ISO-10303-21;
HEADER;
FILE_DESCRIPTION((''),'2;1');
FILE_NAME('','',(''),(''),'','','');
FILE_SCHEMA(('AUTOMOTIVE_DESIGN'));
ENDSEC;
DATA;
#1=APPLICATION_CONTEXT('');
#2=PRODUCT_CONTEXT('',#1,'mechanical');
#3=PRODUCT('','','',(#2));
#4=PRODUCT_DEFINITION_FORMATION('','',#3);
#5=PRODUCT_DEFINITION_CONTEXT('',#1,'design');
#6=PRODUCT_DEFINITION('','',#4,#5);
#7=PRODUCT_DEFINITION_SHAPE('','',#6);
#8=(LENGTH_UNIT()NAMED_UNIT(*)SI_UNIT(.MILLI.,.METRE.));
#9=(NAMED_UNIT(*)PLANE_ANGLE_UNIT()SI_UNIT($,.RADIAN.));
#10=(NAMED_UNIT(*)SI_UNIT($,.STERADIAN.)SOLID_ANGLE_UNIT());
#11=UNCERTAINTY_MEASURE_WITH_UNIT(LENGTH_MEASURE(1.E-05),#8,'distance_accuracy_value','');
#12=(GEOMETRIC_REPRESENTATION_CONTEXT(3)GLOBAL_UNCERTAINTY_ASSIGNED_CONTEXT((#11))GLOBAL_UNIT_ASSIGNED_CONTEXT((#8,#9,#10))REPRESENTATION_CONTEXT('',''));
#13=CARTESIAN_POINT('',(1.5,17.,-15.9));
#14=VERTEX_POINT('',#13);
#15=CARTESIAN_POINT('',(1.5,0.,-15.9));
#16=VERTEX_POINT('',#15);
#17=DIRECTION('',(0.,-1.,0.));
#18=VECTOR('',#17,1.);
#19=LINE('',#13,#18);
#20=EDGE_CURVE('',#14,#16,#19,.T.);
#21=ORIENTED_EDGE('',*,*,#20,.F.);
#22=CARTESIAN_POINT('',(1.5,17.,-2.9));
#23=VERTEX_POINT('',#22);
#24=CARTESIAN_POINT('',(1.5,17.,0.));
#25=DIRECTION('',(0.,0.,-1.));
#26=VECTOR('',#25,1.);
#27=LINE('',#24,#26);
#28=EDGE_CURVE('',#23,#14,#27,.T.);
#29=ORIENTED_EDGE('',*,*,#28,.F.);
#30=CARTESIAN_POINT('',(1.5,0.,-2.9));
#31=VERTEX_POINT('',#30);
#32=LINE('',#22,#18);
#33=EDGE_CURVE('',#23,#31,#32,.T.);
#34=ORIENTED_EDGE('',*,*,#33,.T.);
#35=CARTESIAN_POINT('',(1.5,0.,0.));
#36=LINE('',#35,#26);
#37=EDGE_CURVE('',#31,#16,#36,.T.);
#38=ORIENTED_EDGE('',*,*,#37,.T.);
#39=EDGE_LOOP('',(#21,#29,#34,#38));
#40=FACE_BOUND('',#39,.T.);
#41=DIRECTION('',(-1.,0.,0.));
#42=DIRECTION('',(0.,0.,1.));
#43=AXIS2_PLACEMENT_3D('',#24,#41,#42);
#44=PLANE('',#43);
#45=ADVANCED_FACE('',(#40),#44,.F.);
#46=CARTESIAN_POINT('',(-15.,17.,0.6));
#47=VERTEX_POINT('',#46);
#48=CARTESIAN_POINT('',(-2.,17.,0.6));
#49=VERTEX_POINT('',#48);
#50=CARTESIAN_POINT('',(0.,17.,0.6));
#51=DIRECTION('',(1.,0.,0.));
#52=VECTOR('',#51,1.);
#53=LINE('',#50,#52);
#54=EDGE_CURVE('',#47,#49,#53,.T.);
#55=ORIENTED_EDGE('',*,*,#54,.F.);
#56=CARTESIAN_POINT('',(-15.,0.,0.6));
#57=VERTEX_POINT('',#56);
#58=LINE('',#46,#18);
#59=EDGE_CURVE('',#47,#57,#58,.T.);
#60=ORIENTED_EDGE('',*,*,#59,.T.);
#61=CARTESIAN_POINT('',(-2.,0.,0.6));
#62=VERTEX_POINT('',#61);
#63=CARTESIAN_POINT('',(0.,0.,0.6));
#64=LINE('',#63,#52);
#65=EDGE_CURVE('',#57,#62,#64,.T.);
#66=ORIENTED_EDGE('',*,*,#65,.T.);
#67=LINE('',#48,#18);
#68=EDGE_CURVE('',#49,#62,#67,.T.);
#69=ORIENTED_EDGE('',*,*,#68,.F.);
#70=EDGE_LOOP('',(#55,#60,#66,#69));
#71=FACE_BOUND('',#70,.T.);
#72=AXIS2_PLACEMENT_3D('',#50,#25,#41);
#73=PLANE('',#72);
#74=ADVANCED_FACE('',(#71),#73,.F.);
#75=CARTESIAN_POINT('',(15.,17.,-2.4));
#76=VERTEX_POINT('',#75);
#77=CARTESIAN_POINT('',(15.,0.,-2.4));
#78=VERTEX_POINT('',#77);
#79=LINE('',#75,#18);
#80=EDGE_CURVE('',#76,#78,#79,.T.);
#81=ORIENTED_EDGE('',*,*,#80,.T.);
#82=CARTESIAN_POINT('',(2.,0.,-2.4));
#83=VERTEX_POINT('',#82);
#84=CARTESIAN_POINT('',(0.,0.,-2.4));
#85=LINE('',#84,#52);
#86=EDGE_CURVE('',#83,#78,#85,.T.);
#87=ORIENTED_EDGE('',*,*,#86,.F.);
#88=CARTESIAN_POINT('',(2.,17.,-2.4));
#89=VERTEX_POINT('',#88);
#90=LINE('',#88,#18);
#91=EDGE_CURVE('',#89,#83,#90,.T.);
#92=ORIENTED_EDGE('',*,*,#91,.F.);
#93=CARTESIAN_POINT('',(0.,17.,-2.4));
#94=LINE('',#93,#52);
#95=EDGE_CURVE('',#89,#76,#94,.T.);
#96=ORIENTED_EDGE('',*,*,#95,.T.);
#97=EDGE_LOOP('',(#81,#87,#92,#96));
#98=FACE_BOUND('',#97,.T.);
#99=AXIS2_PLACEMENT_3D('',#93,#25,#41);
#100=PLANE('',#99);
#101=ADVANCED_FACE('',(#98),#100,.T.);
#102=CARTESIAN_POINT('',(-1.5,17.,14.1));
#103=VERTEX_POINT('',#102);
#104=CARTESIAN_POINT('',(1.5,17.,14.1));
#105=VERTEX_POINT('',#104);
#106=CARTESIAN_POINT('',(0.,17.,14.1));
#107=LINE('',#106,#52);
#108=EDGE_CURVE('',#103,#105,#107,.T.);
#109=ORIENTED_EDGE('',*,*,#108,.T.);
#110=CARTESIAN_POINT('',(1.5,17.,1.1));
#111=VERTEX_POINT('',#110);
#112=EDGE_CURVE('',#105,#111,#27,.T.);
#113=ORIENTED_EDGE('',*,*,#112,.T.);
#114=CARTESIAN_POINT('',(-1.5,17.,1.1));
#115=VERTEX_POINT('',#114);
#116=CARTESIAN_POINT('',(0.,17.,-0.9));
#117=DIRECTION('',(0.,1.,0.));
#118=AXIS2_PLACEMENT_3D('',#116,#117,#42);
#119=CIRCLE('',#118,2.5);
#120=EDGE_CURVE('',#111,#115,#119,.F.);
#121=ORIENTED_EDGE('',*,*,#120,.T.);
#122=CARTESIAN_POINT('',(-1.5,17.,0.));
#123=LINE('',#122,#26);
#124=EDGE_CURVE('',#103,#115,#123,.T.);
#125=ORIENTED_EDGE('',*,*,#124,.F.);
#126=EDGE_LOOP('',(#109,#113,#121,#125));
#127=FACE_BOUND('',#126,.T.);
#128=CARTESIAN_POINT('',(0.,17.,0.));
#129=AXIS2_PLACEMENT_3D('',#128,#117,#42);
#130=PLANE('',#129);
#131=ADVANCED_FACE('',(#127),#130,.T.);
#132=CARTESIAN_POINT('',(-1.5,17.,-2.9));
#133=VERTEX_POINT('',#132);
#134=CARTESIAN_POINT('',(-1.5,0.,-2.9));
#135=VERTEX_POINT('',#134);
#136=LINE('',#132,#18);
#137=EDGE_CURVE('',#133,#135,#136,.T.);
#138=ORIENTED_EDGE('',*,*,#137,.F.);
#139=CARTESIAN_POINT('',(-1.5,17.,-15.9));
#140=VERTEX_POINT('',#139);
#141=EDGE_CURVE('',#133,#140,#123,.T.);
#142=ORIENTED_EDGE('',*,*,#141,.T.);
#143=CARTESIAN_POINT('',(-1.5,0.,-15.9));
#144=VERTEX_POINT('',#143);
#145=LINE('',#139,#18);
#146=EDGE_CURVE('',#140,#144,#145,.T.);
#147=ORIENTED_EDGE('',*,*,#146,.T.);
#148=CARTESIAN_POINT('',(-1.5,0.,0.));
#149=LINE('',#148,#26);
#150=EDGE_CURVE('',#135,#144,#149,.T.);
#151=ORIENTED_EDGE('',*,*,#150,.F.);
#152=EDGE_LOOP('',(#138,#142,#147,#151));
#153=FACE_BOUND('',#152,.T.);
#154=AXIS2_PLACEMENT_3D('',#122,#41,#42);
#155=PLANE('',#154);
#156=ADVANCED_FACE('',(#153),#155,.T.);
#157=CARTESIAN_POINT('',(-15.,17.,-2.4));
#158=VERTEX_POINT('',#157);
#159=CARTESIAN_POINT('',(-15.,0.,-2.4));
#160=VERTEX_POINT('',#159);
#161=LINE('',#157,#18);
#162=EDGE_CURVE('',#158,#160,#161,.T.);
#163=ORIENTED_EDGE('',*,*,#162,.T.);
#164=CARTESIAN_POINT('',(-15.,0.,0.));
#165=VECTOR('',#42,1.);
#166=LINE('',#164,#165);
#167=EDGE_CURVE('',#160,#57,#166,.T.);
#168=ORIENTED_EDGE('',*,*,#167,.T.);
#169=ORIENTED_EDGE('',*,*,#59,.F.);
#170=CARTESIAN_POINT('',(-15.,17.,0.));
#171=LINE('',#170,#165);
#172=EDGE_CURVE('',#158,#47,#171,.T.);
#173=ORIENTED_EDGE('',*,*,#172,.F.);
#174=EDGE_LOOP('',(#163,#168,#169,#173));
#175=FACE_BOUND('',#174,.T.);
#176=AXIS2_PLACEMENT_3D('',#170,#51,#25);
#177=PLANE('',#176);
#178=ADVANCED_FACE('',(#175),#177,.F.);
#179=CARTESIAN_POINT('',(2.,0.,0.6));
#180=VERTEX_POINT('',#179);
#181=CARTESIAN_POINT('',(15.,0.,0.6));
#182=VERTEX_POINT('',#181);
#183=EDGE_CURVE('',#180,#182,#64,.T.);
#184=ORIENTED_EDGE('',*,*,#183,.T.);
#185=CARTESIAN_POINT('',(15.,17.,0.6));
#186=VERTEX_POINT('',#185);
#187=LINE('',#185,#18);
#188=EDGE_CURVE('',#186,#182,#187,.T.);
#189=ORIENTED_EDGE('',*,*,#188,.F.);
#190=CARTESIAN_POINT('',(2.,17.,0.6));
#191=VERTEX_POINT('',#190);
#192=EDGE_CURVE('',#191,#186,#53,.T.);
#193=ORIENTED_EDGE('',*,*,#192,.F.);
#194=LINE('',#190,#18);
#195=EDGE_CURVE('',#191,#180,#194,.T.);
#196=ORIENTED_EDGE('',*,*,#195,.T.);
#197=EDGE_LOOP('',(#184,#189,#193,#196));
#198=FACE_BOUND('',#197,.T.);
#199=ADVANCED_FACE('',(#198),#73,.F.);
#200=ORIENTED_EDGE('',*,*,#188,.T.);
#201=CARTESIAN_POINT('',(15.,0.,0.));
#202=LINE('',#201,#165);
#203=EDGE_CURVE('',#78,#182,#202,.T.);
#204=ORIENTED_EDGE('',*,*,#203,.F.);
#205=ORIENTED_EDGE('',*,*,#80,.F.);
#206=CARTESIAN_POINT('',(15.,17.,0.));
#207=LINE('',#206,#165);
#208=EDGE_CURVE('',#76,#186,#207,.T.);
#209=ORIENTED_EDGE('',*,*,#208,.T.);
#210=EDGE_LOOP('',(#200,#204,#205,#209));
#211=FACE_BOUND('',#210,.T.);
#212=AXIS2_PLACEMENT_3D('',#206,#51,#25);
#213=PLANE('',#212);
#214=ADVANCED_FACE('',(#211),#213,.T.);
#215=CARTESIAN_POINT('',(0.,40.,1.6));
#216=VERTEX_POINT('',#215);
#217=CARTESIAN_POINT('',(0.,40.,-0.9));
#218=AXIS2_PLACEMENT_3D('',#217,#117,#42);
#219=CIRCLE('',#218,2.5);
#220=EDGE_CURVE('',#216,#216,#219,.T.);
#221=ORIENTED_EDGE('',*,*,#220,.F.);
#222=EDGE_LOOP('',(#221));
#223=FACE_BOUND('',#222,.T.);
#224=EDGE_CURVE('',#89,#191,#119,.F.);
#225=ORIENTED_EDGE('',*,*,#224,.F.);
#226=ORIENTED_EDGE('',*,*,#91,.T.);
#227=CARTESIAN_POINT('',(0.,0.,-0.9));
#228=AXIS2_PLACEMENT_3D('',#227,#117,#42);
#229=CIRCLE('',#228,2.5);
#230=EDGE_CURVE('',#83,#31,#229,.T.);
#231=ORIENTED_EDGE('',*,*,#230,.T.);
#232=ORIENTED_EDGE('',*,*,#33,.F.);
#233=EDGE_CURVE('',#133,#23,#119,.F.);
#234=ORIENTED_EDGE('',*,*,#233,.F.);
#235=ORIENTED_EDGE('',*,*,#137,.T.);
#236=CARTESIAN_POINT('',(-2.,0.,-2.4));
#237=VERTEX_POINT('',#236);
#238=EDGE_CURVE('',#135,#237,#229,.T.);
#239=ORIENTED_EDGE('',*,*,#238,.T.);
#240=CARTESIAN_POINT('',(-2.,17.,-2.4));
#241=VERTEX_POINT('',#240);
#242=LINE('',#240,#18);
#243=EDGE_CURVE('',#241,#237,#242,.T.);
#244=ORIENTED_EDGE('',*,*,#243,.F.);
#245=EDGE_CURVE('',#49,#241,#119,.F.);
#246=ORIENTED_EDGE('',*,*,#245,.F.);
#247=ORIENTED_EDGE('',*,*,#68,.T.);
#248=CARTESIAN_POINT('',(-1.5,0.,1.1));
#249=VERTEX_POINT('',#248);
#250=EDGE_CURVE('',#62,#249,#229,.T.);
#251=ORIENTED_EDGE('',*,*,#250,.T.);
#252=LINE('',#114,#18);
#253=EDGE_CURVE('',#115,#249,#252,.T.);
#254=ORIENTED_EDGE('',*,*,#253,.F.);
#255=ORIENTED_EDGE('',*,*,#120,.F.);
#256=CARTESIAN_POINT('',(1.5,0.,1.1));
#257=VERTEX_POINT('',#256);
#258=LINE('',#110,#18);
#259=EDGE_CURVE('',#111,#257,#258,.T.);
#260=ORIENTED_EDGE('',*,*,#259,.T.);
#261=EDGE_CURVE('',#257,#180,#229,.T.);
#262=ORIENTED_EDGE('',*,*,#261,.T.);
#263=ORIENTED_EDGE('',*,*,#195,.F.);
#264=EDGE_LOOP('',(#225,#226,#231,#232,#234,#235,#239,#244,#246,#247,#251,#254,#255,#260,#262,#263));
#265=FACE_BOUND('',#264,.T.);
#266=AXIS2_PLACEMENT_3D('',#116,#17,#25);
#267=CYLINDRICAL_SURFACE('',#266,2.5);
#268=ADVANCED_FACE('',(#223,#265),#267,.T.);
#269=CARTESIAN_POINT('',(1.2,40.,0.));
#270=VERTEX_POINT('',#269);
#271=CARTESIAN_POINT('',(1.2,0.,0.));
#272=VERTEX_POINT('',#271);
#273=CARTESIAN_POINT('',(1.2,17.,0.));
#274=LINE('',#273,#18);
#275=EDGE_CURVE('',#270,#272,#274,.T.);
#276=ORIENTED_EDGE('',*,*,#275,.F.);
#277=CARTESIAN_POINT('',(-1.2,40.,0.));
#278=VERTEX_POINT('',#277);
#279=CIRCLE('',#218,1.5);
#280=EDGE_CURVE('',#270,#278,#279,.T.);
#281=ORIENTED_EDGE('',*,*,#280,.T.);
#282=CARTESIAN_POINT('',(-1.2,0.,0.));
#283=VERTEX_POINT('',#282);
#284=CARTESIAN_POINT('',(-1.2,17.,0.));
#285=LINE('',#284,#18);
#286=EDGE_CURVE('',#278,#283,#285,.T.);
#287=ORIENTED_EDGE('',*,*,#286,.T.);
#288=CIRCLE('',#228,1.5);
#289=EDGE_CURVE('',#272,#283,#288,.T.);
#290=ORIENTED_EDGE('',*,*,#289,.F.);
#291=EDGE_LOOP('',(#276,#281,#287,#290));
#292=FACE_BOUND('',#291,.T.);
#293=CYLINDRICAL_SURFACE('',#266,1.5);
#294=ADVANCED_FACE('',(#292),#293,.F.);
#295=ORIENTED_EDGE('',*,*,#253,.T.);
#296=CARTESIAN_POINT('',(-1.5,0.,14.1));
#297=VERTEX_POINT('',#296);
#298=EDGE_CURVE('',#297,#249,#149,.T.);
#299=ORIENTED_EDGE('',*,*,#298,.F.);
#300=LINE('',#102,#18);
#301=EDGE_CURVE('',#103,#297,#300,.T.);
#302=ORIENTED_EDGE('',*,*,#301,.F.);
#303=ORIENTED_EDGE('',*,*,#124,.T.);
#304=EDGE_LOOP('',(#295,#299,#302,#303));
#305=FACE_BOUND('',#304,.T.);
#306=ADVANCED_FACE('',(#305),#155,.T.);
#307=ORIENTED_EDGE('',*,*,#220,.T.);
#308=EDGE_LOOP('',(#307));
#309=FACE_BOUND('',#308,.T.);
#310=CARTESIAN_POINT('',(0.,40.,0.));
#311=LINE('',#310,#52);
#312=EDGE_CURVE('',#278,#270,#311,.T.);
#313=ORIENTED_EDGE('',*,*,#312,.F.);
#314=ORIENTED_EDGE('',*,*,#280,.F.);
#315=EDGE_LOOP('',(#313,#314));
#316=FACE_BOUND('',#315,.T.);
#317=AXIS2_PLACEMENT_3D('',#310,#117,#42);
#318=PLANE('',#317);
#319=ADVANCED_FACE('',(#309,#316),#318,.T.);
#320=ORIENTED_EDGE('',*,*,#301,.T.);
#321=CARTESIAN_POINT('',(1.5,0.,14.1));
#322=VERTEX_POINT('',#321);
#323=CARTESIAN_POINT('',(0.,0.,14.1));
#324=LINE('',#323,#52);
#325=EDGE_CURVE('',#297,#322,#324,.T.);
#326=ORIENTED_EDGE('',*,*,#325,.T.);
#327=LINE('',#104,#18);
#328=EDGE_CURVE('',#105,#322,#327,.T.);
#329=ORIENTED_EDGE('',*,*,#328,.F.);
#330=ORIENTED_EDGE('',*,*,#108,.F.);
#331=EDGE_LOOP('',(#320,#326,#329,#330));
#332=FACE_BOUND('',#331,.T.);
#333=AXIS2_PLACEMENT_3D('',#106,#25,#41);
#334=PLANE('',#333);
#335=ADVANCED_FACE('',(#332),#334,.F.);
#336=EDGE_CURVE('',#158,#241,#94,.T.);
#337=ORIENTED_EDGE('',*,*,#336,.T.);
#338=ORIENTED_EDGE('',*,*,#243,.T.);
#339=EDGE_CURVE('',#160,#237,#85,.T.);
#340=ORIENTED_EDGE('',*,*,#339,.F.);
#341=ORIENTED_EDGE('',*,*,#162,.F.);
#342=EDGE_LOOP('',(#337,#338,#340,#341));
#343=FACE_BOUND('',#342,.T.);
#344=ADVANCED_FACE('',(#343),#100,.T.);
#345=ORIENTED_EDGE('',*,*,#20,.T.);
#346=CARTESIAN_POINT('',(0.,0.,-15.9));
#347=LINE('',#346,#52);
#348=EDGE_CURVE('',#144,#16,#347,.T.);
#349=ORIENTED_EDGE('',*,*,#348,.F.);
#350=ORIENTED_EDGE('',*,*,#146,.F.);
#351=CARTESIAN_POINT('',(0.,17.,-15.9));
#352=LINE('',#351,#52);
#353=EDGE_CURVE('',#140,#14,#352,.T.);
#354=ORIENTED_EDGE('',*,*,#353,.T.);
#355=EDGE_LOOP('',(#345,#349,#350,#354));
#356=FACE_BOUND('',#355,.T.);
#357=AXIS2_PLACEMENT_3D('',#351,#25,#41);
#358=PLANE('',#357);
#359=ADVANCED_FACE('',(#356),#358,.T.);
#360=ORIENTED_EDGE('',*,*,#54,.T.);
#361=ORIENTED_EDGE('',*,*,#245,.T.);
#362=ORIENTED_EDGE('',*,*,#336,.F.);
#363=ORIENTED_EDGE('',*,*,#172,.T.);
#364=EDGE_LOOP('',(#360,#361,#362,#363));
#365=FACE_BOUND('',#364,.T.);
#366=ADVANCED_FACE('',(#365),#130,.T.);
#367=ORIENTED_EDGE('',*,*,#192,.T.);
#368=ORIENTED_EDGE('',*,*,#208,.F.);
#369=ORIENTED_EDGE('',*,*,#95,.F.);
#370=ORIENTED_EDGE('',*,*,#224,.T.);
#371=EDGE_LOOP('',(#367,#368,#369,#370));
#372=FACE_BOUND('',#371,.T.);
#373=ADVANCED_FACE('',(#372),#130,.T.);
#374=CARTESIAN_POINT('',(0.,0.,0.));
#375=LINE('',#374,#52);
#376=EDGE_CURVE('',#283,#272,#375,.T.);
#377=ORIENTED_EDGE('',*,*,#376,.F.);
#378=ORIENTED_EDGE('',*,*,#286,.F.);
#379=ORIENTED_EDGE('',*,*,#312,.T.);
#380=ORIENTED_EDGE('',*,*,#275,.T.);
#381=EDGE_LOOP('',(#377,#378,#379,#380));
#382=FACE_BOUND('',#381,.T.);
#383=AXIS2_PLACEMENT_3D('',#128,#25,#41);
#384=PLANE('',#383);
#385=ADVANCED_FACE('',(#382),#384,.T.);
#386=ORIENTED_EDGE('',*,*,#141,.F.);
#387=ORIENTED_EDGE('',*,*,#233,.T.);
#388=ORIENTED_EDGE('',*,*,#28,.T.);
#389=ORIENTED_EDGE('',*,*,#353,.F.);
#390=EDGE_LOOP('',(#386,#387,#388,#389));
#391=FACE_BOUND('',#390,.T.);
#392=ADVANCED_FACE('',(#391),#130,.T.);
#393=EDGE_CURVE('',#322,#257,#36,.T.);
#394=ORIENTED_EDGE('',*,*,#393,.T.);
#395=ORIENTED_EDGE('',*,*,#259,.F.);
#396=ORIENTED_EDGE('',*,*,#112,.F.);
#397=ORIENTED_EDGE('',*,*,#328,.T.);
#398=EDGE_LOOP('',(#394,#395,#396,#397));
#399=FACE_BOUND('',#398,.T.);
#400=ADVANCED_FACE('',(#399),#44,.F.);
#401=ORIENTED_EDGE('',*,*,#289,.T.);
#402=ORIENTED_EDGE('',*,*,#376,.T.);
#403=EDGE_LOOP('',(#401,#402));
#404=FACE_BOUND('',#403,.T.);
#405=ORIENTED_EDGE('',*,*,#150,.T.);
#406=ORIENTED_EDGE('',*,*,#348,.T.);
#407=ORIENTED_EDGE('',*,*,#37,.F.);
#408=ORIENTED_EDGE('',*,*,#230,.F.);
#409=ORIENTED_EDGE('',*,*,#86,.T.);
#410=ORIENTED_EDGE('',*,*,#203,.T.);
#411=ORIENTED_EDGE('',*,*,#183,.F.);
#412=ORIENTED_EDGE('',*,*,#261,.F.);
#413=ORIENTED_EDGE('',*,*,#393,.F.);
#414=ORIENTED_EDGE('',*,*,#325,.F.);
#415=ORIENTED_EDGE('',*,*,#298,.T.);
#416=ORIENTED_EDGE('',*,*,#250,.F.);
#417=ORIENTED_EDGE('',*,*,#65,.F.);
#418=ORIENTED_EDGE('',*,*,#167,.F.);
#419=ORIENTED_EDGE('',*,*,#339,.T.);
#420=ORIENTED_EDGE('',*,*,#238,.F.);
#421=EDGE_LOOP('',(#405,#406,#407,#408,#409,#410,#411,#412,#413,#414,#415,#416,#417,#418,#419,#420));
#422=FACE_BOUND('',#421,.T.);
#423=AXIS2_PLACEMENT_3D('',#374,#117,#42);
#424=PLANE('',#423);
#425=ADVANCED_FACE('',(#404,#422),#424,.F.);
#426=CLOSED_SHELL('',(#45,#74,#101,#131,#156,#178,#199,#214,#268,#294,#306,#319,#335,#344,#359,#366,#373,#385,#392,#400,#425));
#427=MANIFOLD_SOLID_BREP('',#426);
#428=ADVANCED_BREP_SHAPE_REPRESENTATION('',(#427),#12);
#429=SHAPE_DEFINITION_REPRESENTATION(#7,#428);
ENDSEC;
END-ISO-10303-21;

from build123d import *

# Parameters (mm, degrees)
BOSS_EXTRUDE1_DEPTH = 17
SKETCH1_3_R         = 2.5
BOSS_EXTRUDE2_DEPTH = 40


with BuildPart() as part:
    # Sketch1 → Boss-Extrude1 (new body)
    with BuildSketch(Plane(origin=(0, 0, 0), x_dir=(1, 0, 0), z_dir=(0, 1, 0))):
        with BuildLine():
            ThreePointArc((1.5, -1.1), (1.767766953, -0.867766953), (2, -0.6))
            Line((2, -0.6), (15, -0.6))
            Line((15, -0.6), (15, 2.4))
            Line((15, 2.4), (2, 2.4))
            ThreePointArc((2, 2.4), (1.767766953, 2.667766953), (1.5, 2.9))
            Line((1.5, 2.9), (1.5, 15.9))
            Line((1.5, 15.9), (-1.5, 15.9))
            Line((-1.5, 15.9), (-1.5, 2.9))
            ThreePointArc((-1.5, 2.9), (-1.767766953, 2.667766953), (-2, 2.4))
            Line((-2, 2.4), (-15, 2.4))
            Line((-15, 2.4), (-15, -0.6))
            Line((-15, -0.6), (-2, -0.6))
            ThreePointArc((-2, -0.6), (-1.767766953, -0.867766953), (-1.5, -1.1))
            Line((-1.5, -1.1), (-1.5, -14.1))
            Line((-1.5, -14.1), (1.5, -14.1))
            Line((1.5, -14.1), (1.5, -1.1))
        make_face()
        with BuildLine():
            ThreePointArc((-1.2, 0), (0, 2.4), (1.2, 0))
            Line((1.2, 0), (-1.2, 0))
        make_face(mode=Mode.SUBTRACT)
    extrude(amount=BOSS_EXTRUDE1_DEPTH)

    # Sketch1<3> → Boss-Extrude2 (add)
    with BuildSketch(Plane(origin=(0, 0, 0), x_dir=(1, 0, 0), z_dir=(0, 1, 0))):
        with Locations((0, 0.9)):
            Circle(SKETCH1_3_R)
        with BuildLine():
            ThreePointArc((-1.2, 0), (0, 2.4), (1.2, 0))
            Line((1.2, 0), (-1.2, 0))
        make_face(mode=Mode.SUBTRACT)
    extrude(amount=BOSS_EXTRUDE2_DEPTH)


solid = part.part
